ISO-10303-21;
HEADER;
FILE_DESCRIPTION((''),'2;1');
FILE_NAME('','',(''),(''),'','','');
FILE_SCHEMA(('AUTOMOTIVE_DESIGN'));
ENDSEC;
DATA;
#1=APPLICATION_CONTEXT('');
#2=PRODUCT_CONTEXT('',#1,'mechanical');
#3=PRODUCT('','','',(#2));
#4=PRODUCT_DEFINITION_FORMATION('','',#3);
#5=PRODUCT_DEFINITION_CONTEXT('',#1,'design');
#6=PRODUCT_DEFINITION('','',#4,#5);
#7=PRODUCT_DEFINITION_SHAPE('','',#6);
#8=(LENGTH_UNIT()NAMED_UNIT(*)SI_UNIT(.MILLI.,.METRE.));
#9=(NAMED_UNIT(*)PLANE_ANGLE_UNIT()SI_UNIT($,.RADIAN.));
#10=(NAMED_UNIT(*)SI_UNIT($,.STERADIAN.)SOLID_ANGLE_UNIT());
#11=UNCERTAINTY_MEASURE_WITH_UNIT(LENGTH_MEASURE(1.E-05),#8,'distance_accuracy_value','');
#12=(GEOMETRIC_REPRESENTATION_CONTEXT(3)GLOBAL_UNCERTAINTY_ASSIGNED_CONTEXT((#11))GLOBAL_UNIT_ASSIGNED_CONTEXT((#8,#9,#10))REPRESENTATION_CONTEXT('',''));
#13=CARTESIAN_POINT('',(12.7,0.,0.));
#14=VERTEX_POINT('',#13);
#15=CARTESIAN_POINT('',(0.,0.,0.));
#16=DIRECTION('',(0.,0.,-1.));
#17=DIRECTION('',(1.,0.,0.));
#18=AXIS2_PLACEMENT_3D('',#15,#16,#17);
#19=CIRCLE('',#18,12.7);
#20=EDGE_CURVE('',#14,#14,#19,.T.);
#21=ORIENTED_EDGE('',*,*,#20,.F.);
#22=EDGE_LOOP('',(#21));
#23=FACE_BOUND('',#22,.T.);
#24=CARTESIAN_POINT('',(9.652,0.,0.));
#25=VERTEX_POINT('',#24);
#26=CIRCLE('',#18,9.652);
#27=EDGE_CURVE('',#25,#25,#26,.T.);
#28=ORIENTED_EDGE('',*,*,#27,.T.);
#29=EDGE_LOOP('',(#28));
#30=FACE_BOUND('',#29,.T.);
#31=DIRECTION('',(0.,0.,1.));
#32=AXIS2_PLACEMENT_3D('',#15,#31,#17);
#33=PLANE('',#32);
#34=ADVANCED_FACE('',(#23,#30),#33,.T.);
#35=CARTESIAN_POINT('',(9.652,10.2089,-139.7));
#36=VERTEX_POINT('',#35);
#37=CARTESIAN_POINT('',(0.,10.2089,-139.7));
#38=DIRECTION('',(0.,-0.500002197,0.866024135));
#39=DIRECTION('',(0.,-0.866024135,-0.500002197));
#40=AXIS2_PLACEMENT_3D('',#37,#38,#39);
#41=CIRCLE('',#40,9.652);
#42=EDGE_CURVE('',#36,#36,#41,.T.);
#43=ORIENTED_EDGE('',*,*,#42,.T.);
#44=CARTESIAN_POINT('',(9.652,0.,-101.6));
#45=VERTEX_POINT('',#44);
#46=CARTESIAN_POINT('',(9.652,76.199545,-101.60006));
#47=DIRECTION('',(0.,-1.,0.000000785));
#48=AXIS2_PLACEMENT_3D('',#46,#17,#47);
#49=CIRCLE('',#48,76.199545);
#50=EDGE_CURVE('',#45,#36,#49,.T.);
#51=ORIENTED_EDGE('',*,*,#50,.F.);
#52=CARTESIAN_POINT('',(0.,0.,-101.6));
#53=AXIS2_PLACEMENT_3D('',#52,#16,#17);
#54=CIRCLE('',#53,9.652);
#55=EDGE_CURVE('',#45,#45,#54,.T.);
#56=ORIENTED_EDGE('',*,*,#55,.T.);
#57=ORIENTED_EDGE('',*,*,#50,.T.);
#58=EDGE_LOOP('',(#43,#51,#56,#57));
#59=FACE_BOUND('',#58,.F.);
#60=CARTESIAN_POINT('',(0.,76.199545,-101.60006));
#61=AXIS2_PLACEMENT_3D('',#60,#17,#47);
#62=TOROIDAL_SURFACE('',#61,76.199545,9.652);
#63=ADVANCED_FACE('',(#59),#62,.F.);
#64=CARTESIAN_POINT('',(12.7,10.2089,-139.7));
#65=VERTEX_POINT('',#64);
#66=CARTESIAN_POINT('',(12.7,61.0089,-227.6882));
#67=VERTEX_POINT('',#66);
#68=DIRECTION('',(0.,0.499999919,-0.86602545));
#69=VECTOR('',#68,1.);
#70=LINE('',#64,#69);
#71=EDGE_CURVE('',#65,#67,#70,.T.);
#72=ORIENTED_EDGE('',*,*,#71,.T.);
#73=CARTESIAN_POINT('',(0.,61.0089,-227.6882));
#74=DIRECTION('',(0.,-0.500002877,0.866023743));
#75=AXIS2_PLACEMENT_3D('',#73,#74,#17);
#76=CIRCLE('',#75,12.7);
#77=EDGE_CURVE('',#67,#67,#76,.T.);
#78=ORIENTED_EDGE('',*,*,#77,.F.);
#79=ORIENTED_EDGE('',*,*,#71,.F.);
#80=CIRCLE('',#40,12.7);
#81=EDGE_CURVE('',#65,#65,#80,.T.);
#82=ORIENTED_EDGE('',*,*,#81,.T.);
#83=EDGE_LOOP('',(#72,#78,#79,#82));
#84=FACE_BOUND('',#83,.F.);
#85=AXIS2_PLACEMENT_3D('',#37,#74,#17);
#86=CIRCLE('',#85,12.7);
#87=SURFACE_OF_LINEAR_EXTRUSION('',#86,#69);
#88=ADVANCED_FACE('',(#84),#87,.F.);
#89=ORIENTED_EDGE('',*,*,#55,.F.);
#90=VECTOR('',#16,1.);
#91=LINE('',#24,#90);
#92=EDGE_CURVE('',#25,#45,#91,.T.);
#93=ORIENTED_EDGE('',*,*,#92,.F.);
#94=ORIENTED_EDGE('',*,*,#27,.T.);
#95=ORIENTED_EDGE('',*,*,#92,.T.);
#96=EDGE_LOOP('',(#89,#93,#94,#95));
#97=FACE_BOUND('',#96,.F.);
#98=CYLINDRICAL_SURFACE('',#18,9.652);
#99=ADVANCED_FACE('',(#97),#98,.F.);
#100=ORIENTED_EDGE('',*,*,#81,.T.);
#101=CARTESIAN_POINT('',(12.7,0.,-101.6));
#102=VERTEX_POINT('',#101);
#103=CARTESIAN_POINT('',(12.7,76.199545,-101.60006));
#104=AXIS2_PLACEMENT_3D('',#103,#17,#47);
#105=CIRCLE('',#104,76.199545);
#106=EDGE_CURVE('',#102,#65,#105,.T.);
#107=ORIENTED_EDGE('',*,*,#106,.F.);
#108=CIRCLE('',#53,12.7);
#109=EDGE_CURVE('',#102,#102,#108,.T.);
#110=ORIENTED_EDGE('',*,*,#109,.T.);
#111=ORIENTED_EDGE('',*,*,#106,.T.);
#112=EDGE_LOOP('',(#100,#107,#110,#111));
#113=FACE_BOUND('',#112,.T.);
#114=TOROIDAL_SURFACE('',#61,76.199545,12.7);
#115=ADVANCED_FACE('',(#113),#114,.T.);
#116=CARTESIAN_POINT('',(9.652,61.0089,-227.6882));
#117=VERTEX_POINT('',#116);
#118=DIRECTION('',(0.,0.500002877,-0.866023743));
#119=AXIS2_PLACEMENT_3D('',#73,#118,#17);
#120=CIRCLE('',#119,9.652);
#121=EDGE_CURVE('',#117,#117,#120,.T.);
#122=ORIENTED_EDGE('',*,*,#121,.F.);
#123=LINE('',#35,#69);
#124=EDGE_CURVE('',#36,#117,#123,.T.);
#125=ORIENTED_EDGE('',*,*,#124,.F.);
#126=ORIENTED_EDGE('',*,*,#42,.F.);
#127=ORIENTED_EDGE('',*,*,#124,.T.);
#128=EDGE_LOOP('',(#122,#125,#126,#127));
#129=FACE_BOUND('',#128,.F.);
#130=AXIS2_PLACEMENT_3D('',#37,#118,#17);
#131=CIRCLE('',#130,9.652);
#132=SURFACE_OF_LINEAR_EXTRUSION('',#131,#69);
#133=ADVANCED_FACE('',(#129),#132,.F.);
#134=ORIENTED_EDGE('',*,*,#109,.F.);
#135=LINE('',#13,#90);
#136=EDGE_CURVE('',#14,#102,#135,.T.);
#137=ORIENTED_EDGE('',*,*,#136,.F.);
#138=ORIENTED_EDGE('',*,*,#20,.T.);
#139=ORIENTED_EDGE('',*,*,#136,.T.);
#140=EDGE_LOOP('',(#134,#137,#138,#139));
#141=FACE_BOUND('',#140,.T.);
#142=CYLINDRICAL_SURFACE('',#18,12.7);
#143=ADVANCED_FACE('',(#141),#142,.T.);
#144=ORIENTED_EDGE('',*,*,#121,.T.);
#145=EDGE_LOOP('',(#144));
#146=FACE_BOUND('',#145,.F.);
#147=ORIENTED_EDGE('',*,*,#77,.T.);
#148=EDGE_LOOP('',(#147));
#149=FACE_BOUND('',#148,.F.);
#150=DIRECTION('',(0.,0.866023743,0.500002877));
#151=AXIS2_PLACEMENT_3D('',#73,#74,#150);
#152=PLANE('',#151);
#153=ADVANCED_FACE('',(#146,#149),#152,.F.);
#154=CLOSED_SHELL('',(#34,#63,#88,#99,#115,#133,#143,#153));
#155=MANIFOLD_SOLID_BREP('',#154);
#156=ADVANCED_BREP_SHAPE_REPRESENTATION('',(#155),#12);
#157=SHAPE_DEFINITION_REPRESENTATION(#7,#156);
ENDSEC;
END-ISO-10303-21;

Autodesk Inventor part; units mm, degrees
ref_plane "YZ Plane" through (0, 0, 0) normal (1, 0, 0) x (0, 1, 0)
ref_plane "XZ Plane" through (0, 0, 0) normal (0, 1, 0) x (-1, 0, 0)
ref_plane "XY Plane" through (0, 0, 0) normal (0, 0, 1) x (1, 0, 0)
sketch "Sketch1" plane through (0, 0, 0) normal (1, 0, 0) x (0, 1, 0)
  line L0 (0, 0) -> (0, -101.6)
  arc A0 (0, -101.6) -> (10.2089, -139.7) centre (76.2, -101.6) ccw
  line L1 (10.2089, -139.7) -> (61.0089, -227.6882)
  dimension "bendAngleSketch" = 150
  dimension "CLR" = 76.2
  dimension "ST" = 101.6
sketch "Sketch2" plane through (0, 0, 0) normal (0, 0, 1) x (1, 0, 0)
  circle A0 centre (0, 0) radius 12.7
  circle A1 centre (0, 0) radius 9.652
  dimension "outerDiameter" = 25.4
  dimension "wallThickness" = 3.048
sweep "Sweep1" add profiles "Sketch2" path "Sketch1"
equation "\"bendAngle\" = 30deg"
properties part number "TB11GA1330"
